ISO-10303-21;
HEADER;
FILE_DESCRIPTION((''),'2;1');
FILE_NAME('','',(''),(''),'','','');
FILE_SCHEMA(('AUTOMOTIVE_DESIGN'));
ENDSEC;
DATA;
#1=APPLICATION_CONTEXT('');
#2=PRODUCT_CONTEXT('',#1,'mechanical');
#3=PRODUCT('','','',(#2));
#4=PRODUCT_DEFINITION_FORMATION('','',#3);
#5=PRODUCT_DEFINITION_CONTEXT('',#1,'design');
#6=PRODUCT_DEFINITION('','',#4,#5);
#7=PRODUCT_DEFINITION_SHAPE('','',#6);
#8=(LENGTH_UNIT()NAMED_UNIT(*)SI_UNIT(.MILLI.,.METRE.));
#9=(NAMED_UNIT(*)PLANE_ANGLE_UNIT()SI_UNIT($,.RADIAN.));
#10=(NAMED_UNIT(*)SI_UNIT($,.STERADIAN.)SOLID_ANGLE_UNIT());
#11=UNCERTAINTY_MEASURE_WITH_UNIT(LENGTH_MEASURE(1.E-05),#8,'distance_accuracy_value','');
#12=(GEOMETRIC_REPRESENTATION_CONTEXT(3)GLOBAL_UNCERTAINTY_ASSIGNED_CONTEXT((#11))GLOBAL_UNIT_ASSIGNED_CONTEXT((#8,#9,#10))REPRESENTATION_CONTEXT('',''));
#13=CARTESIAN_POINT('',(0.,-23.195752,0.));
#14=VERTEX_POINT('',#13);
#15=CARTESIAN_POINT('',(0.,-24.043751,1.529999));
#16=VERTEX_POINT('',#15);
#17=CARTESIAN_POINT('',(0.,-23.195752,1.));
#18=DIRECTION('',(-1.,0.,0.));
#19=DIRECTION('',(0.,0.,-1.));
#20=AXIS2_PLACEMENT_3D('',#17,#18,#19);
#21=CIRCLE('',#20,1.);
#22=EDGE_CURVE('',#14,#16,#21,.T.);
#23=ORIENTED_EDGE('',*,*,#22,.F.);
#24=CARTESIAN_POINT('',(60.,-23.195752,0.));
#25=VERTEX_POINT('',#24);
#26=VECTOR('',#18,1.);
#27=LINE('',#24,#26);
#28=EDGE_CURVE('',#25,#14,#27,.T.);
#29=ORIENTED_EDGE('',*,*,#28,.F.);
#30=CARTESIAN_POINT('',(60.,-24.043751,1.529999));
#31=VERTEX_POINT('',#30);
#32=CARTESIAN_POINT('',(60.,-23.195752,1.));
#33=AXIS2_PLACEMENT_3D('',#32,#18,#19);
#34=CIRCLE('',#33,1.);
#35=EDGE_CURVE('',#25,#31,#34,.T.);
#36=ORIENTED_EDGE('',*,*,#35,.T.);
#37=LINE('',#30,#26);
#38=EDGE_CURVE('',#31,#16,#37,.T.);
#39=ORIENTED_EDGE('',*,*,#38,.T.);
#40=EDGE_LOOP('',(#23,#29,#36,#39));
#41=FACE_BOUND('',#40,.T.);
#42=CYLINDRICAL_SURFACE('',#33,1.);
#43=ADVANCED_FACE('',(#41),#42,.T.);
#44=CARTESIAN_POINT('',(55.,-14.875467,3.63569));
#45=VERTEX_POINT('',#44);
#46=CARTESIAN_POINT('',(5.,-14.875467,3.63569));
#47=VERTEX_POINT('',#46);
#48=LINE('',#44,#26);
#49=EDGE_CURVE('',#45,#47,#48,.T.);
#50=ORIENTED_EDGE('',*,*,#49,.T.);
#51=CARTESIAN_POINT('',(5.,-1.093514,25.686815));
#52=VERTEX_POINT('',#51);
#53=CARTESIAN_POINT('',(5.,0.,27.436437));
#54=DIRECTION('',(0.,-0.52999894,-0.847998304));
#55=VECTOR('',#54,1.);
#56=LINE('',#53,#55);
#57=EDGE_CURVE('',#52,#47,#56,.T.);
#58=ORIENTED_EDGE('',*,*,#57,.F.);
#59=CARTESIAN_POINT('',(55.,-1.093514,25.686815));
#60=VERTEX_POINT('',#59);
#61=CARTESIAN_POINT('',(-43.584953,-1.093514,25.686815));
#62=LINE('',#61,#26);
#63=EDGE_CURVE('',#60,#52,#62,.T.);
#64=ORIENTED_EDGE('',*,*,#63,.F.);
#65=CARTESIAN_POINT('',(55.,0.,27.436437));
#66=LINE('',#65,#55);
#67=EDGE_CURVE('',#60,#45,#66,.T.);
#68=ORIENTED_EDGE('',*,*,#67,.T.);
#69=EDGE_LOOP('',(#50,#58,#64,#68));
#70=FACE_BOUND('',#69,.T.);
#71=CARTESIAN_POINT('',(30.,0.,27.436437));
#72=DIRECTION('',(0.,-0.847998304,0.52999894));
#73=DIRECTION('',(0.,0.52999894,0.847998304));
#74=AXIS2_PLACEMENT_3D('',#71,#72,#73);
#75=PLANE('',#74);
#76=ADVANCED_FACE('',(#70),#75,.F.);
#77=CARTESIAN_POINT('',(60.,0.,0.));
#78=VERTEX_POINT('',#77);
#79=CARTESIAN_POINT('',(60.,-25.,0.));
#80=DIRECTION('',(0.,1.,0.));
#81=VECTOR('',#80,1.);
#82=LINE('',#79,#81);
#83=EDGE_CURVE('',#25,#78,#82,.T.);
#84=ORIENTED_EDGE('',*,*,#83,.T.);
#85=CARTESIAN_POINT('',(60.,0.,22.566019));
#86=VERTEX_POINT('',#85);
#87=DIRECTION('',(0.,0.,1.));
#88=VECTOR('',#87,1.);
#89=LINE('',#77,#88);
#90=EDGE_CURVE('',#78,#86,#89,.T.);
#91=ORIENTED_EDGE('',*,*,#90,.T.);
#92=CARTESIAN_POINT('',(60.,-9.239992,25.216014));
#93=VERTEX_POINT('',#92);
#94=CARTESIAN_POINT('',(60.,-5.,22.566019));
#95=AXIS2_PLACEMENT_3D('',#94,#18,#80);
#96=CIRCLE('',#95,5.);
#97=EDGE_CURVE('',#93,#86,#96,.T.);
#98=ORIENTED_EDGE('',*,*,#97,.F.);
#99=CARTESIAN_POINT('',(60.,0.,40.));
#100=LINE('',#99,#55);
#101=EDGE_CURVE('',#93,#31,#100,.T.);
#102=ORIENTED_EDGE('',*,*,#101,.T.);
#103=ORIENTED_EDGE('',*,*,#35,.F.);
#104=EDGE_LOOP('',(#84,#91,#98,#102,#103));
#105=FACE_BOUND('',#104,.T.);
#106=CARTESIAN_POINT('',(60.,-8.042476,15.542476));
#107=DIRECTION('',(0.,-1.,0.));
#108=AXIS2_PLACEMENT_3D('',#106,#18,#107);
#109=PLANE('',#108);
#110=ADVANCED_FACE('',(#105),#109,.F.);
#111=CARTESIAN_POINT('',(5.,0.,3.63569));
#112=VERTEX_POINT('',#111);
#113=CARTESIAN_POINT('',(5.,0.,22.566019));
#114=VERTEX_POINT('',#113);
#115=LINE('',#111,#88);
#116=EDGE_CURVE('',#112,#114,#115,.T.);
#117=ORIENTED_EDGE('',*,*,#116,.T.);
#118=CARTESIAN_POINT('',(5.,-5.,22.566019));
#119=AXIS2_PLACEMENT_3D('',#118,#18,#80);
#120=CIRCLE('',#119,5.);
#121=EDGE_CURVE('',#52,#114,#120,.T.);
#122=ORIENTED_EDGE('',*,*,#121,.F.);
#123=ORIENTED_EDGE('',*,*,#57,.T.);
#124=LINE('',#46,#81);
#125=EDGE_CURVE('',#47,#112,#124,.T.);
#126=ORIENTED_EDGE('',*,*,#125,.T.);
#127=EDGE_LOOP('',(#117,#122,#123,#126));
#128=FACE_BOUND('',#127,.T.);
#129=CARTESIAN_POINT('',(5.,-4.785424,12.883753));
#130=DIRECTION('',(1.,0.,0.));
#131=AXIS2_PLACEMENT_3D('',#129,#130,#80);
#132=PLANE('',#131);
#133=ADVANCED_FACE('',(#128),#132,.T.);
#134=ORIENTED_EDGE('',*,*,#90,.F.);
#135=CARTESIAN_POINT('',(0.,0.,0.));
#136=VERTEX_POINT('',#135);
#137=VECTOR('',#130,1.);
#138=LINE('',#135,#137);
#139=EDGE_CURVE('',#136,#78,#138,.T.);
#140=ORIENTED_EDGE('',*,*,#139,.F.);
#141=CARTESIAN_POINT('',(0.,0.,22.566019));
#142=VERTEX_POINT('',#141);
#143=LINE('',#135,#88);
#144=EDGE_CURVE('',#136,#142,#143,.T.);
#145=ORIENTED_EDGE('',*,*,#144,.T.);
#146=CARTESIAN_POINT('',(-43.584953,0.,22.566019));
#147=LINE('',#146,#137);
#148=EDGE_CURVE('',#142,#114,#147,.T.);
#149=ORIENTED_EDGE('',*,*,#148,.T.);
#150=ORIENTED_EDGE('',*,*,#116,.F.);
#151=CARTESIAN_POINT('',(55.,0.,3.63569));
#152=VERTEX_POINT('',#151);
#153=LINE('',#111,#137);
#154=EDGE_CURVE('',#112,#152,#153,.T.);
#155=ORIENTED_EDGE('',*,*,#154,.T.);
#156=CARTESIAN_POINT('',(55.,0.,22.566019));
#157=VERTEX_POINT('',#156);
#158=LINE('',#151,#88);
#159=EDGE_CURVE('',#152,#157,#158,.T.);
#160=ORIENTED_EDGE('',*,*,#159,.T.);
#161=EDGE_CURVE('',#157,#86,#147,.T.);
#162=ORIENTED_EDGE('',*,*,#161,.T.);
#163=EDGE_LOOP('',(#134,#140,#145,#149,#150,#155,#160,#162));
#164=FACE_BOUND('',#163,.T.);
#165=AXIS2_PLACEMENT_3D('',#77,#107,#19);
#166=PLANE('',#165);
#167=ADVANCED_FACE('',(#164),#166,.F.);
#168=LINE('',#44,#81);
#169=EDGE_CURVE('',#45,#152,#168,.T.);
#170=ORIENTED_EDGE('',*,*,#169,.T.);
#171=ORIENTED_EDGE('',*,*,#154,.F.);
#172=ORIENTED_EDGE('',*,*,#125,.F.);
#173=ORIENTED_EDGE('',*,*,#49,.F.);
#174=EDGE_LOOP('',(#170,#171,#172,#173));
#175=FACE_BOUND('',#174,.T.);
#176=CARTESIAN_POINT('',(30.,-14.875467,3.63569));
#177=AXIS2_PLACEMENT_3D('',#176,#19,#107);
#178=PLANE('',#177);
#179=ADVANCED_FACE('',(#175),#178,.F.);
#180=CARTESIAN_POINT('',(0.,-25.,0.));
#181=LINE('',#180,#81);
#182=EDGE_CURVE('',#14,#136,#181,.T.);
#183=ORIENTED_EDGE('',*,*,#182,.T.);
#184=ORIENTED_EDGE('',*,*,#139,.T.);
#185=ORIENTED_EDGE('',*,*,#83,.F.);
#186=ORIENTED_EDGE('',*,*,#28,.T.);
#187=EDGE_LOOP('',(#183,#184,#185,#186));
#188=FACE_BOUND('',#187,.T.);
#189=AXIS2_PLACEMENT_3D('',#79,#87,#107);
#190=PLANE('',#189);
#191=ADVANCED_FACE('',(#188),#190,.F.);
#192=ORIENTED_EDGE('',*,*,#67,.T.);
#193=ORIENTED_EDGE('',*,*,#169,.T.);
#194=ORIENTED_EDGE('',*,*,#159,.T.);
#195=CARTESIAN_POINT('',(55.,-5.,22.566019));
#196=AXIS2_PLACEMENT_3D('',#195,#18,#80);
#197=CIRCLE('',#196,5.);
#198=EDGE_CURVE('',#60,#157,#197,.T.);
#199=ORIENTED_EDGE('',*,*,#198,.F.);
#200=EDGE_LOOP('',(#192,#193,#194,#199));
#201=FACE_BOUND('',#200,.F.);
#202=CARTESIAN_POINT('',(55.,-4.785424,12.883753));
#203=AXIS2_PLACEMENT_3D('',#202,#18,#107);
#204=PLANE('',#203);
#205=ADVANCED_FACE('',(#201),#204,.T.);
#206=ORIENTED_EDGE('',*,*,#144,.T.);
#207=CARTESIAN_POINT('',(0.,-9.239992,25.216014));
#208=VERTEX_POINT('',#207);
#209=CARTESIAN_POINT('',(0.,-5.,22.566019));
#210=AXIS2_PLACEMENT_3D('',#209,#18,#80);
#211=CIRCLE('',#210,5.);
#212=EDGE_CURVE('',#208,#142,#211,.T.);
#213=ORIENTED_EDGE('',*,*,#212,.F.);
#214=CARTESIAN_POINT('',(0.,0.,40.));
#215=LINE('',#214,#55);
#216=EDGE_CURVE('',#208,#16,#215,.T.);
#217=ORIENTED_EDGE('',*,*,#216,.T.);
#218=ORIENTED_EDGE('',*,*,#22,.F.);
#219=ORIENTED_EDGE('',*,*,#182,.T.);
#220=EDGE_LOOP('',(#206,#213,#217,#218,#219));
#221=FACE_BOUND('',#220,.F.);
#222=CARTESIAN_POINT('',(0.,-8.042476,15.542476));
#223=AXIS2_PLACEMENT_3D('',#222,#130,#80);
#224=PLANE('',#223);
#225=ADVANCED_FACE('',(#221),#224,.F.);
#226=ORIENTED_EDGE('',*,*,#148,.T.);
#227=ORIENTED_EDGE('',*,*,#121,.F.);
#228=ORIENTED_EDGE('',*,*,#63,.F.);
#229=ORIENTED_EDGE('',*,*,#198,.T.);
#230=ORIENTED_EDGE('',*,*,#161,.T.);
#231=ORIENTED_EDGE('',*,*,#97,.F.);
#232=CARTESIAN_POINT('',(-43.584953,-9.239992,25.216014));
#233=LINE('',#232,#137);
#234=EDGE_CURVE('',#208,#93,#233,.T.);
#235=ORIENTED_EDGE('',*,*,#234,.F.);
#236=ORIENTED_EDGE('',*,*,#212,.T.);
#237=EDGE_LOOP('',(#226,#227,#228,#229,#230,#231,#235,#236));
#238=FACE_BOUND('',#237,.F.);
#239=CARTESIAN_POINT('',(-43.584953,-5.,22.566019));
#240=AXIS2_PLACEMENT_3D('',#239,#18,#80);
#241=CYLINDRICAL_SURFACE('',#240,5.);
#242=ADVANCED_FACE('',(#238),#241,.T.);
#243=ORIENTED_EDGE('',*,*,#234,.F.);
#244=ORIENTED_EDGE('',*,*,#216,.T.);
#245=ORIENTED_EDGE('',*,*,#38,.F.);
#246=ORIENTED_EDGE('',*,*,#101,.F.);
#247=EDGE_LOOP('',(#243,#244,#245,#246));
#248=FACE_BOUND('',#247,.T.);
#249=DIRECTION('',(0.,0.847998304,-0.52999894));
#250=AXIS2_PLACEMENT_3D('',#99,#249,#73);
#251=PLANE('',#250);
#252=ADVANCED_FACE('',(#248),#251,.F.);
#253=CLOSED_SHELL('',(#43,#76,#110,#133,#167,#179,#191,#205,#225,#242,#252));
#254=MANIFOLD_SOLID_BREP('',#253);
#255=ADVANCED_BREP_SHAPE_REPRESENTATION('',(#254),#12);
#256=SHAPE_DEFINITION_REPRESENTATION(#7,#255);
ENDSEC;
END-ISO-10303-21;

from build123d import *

# Parameters (mm, degrees)
F1_DEPTH    = 30
F3_DEPTH    = 25
F5_T1_DEPTH = 147.1699056603
F6_R        = 1


# Not quite as in the source:
# - a fillet or chamfer that OpenCascade refuses, or shapes differently, is made with other operations: its cross-section is extruded or revolved along the edge and cut away or added


with BuildPart() as f1:
    # F0 (on Right) → F1 (new body)
    with BuildSketch(Plane.YZ):
        Polygon((-25, 0), (0, 0), (0, 40), align=None)
    extrude(amount=F1_DEPTH)

    # F2 (on face) → F3 (cut)
    with BuildSketch(Plane.YZ.offset(30)):
        Polygon((-14.8754669353, 3.6356896162), (0, 3.6356896162), (0, 27.4364367127), align=None)
    extrude(amount=-F3_DEPTH, mode=Mode.SUBTRACT)

    # F4: F1 across face


with BuildPart() as f1_1:
    add(f1.part)
    add(f1.part.mirror(Plane(origin=(30, -10.1830881956, 14.3002167565), x_dir=(0, 1, 0), z_dir=(1, 0, 0))))

    # F5: fillet of radius 5 on 1 edges, made by hand

    # F5_s2 → F5_t1 (cut)
    with BuildSketch(Plane.YZ.offset(-43.5849528301)):
        with BuildLine():
            ThreePointArc((0, 22.5660188679), (-3.6215874348, 27.3722625988), (-9.23999152, 25.216013568))
            Line((-9.23999152, 25.216013568), (0, 40))
            Line((0, 40), (0, 22.5660188679))
        make_face()
    extrude(amount=F5_T1_DEPTH, mode=Mode.SUBTRACT)

    # F6
    f6_edges = [f1_1.edges().sort_by_distance(p)[0] for p in [
        (30, -25, 0),
    ]]
    fillet(f6_edges, radius=F6_R)


solid = f1_1.part
